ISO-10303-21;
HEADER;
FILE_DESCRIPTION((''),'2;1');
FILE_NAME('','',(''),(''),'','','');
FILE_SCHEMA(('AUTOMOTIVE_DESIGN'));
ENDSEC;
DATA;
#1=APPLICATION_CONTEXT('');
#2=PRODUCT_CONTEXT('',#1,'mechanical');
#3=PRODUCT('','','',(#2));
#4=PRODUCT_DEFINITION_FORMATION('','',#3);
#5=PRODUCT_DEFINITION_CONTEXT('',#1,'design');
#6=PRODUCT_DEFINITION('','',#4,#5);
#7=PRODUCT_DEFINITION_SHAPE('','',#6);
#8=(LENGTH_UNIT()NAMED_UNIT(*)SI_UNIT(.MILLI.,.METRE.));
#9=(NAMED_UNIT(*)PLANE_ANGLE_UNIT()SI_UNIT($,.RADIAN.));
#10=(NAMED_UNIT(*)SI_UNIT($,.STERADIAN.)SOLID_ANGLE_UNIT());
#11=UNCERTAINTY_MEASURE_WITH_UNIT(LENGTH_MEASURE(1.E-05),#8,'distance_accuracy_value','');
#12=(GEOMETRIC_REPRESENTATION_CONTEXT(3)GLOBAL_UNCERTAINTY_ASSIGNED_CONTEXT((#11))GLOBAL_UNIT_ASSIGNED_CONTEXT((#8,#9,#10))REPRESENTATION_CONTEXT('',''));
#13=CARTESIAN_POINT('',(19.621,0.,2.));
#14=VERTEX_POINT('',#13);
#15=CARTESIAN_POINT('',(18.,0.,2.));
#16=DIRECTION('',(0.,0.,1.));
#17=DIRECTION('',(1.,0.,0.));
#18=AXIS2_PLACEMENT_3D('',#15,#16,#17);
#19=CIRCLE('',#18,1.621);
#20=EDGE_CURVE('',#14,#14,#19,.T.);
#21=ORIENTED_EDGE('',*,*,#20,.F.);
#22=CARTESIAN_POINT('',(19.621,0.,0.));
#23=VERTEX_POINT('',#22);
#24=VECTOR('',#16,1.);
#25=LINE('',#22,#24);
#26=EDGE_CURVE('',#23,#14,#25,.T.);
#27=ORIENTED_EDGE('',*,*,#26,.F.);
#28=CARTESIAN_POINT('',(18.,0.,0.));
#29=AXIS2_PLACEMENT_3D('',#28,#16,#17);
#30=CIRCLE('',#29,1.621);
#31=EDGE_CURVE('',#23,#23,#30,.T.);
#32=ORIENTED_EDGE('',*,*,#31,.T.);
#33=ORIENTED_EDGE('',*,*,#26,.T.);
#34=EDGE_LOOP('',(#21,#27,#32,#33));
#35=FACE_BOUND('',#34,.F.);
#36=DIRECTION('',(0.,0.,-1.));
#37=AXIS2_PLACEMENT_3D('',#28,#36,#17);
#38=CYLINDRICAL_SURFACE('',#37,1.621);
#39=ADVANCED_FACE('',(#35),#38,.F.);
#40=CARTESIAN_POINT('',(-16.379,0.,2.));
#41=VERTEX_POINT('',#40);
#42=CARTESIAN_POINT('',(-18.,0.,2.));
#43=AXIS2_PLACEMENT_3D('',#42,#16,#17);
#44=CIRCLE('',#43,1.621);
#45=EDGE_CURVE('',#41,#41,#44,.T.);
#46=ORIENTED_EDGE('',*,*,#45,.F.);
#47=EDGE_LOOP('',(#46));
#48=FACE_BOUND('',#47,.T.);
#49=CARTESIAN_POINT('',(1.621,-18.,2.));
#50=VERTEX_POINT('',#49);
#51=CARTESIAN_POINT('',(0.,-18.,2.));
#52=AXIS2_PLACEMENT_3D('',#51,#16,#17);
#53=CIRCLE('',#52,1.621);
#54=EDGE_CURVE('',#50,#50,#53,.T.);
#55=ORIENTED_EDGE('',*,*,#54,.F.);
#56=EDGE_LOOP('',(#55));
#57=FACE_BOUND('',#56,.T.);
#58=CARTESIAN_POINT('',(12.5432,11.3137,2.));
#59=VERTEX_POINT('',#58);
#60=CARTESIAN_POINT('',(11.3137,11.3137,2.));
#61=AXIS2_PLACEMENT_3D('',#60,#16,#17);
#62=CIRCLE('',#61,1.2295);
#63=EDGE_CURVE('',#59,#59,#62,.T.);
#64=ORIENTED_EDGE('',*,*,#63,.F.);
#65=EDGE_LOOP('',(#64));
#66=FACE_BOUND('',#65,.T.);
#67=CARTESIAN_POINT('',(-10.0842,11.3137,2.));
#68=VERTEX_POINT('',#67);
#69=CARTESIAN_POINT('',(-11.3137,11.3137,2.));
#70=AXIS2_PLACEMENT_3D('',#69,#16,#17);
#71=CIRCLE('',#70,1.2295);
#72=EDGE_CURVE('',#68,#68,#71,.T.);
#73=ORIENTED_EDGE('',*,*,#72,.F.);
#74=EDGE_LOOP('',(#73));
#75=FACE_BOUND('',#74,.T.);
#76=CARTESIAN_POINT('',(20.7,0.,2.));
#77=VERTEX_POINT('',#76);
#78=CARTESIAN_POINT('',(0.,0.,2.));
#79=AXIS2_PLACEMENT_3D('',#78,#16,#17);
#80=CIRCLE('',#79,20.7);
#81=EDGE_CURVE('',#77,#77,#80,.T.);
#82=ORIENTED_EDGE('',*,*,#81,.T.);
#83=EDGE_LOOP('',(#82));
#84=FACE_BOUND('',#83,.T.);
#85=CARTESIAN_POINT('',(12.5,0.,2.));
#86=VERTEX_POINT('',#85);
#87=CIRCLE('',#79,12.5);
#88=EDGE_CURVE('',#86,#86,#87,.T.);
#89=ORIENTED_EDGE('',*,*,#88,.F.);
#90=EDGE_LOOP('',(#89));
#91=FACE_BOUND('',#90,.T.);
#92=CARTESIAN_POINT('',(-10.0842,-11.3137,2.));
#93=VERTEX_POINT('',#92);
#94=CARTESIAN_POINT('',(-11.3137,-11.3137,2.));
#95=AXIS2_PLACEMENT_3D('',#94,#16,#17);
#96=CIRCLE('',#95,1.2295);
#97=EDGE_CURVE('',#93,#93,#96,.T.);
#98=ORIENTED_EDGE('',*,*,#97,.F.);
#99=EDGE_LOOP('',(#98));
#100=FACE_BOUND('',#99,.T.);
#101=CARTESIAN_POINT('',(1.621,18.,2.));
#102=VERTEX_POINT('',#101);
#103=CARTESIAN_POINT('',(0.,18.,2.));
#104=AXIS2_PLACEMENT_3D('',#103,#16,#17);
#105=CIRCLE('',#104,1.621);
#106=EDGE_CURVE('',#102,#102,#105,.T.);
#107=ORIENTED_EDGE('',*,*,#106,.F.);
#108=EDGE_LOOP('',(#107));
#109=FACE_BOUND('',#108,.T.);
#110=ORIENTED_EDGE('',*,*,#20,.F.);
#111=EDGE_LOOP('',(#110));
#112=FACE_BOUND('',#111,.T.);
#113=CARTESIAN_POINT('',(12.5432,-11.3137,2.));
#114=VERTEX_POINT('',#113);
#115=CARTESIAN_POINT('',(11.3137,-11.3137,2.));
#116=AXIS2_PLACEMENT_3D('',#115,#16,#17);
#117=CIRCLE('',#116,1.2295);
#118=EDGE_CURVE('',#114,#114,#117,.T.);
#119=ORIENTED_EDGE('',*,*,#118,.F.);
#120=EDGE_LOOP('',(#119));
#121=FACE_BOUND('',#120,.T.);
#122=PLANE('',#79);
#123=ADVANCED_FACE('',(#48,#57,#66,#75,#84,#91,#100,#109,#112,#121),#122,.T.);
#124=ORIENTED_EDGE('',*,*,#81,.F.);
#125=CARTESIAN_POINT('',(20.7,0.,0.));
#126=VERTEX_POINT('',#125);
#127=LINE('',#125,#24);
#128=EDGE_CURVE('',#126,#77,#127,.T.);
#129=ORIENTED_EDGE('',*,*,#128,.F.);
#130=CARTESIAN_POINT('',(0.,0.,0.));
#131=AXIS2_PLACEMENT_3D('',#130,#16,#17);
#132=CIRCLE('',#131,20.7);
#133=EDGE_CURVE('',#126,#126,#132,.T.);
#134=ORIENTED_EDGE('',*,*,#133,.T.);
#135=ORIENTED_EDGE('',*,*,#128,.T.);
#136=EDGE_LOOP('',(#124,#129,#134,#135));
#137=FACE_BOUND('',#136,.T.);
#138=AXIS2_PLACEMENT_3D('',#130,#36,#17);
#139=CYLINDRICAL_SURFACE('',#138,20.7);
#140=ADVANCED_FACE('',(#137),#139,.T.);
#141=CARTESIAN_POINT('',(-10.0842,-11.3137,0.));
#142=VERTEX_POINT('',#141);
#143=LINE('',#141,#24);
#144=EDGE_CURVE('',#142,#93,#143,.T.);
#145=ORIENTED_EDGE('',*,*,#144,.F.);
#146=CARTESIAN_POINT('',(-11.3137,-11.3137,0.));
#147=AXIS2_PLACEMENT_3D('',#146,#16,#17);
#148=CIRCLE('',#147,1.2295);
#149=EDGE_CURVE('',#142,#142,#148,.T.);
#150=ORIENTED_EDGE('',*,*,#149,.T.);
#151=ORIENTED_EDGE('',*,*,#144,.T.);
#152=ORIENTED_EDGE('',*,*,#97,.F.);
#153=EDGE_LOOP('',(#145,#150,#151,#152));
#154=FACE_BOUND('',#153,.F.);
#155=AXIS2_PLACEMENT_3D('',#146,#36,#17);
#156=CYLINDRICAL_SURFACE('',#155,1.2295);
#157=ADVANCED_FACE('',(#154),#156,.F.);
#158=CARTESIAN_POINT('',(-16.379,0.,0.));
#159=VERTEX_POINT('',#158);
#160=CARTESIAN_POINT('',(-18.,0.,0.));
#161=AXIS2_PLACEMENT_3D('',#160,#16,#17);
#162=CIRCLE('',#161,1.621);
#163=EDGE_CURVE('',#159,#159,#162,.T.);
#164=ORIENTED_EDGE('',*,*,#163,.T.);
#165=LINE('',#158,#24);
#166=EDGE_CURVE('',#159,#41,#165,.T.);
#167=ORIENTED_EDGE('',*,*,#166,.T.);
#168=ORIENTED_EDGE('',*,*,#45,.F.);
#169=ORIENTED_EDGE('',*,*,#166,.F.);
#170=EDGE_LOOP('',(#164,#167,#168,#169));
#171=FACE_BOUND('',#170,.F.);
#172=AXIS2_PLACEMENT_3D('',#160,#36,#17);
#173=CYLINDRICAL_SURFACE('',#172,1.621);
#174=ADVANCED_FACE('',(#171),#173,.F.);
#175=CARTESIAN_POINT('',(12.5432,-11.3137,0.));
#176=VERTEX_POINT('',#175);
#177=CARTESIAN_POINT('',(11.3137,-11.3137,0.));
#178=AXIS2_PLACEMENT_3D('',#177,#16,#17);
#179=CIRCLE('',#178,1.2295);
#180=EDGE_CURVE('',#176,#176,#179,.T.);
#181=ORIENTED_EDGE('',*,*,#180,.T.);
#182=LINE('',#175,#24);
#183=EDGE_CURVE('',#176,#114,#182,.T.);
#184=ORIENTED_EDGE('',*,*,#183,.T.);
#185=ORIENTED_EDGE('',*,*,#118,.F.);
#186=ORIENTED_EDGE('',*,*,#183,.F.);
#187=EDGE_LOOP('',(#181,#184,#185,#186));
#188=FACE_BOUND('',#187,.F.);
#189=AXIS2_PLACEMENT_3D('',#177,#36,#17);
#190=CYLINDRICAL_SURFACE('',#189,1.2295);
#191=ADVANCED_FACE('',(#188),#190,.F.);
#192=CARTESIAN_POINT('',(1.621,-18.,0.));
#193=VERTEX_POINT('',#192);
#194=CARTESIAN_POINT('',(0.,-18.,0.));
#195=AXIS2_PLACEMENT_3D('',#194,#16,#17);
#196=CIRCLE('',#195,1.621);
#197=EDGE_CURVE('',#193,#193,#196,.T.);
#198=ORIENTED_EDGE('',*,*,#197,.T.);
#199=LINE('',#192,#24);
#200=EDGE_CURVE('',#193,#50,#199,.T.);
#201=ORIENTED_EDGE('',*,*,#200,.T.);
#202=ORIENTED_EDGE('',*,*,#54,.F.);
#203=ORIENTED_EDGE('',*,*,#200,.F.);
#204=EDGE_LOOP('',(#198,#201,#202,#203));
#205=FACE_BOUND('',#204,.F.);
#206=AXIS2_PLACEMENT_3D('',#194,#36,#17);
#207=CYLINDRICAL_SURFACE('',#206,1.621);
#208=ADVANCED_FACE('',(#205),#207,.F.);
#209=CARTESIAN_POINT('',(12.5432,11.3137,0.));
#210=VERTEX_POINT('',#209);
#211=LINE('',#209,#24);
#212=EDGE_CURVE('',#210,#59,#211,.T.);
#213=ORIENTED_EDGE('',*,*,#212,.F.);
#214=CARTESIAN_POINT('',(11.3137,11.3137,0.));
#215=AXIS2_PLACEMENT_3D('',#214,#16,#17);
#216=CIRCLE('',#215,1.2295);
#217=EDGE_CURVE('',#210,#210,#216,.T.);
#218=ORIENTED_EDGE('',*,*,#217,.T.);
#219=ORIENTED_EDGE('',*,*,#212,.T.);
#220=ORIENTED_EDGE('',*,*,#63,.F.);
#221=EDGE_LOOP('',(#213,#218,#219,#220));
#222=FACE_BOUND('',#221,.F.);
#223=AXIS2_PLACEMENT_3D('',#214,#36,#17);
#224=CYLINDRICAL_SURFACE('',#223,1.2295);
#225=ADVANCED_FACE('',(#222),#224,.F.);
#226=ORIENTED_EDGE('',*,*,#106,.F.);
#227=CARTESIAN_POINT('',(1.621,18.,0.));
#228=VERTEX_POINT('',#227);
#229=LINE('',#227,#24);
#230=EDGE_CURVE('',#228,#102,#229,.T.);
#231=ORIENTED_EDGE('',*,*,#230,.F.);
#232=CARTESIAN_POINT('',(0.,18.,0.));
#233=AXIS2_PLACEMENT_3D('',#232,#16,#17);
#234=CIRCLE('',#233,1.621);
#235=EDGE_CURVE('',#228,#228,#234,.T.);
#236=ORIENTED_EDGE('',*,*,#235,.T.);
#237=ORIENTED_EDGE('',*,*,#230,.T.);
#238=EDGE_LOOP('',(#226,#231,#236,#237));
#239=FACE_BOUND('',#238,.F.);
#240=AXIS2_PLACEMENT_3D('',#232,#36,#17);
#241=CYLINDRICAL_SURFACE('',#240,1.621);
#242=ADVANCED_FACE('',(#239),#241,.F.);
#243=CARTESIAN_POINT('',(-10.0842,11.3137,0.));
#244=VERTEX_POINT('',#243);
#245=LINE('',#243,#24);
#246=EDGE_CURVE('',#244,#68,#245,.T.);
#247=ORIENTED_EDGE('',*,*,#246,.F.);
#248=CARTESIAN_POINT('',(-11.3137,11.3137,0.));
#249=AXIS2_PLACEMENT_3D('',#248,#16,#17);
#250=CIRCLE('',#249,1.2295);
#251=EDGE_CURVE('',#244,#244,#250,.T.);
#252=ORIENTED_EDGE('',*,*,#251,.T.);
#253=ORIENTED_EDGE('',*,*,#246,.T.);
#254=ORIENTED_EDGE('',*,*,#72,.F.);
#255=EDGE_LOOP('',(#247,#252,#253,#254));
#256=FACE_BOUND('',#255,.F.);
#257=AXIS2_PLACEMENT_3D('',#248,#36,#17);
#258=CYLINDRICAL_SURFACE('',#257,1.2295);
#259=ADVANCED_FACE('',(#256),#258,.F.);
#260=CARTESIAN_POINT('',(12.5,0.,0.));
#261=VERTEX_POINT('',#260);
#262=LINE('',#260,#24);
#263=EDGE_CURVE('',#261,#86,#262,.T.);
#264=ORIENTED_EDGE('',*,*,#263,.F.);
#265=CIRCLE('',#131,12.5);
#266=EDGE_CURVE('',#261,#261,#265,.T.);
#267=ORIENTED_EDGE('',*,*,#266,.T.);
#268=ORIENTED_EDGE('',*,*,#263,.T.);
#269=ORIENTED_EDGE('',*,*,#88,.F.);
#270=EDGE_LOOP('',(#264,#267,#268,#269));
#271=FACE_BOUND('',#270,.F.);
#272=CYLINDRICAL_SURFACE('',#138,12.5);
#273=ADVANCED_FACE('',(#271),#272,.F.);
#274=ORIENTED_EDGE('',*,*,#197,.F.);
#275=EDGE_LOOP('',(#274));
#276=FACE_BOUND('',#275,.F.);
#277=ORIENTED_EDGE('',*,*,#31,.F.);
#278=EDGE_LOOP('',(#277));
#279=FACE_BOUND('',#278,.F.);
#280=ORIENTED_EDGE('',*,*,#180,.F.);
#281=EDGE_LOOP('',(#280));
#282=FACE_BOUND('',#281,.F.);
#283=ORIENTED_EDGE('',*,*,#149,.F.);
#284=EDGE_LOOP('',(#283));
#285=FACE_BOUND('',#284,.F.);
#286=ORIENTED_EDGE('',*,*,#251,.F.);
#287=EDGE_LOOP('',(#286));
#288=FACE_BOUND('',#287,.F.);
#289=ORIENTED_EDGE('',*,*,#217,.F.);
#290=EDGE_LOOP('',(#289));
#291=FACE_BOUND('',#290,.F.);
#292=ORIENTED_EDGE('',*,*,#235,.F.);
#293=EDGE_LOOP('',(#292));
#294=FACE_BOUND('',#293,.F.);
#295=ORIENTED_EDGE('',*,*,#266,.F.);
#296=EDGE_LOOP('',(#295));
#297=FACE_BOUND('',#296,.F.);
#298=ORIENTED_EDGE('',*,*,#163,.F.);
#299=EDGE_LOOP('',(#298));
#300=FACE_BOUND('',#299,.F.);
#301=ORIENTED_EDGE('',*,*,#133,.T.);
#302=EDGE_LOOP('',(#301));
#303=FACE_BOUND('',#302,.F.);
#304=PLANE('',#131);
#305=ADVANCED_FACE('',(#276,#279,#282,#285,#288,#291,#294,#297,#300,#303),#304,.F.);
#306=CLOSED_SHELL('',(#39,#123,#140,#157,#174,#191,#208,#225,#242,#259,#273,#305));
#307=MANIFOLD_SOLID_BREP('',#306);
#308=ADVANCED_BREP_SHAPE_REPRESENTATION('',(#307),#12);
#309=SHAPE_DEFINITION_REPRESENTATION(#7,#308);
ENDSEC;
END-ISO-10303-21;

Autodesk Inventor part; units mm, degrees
ref_plane "YZ Plane" through (0, 0, 0) normal (1, 0, 0) x (0, 1, 0)
ref_plane "Work Plane1" through (0, 0, 0) normal (0, 0, 1) x (1, 0, 0)
sketch "Sketch1" plane through (0, 0, 0) normal (0, 0, 1) x (1, 0, 0)
  circle A0 centre (0, 0) radius 12.5 projected
  circle A1 centre (0, -18) radius 2 projected
  circle A2 centre (0, 18) radius 2 projected
  circle A3 centre (-18, 0) radius 2 projected
  circle A4 centre (18, 0) radius 2 projected
  circle A5 centre (11.3137, 11.3137) radius 1.6 projected
  circle A6 centre (-11.3137, -11.3137) radius 1.6 projected
  circle A7 centre (-11.3137, 11.3137) radius 1.6 projected
  circle A8 centre (11.3137, -11.3137) radius 1.6 projected
  circle A9 centre (0, 0) radius 20.7 projected
  circle A10 centre (-11.3137, 11.3137) radius 1.2295
  circle A11 centre (0, 18) radius 1.621
  circle A12 centre (11.3137, 11.3137) radius 1.2295
  circle A13 centre (18, 0) radius 1.621
  circle A14 centre (11.3137, -11.3137) radius 1.2295
  circle A15 centre (-11.3137, -11.3137) radius 1.2295
  circle A16 centre (0, -18) radius 1.621
  circle A17 centre (-18, 0) radius 1.621
ref_plane "Work Plane2" through (-10.1976, -10.1976, 2) normal (0, 0, 1) x (0.910504, -0.4135003, 0)
extrude "Extrusion1" add sketch "Sketch1" along normal up to surface (2 mm away) contours A1 | A2 | A3 | A4 | A5 | A6 | A7 | A8 | A9
properties part number "gearboxspacer 2 mm"
